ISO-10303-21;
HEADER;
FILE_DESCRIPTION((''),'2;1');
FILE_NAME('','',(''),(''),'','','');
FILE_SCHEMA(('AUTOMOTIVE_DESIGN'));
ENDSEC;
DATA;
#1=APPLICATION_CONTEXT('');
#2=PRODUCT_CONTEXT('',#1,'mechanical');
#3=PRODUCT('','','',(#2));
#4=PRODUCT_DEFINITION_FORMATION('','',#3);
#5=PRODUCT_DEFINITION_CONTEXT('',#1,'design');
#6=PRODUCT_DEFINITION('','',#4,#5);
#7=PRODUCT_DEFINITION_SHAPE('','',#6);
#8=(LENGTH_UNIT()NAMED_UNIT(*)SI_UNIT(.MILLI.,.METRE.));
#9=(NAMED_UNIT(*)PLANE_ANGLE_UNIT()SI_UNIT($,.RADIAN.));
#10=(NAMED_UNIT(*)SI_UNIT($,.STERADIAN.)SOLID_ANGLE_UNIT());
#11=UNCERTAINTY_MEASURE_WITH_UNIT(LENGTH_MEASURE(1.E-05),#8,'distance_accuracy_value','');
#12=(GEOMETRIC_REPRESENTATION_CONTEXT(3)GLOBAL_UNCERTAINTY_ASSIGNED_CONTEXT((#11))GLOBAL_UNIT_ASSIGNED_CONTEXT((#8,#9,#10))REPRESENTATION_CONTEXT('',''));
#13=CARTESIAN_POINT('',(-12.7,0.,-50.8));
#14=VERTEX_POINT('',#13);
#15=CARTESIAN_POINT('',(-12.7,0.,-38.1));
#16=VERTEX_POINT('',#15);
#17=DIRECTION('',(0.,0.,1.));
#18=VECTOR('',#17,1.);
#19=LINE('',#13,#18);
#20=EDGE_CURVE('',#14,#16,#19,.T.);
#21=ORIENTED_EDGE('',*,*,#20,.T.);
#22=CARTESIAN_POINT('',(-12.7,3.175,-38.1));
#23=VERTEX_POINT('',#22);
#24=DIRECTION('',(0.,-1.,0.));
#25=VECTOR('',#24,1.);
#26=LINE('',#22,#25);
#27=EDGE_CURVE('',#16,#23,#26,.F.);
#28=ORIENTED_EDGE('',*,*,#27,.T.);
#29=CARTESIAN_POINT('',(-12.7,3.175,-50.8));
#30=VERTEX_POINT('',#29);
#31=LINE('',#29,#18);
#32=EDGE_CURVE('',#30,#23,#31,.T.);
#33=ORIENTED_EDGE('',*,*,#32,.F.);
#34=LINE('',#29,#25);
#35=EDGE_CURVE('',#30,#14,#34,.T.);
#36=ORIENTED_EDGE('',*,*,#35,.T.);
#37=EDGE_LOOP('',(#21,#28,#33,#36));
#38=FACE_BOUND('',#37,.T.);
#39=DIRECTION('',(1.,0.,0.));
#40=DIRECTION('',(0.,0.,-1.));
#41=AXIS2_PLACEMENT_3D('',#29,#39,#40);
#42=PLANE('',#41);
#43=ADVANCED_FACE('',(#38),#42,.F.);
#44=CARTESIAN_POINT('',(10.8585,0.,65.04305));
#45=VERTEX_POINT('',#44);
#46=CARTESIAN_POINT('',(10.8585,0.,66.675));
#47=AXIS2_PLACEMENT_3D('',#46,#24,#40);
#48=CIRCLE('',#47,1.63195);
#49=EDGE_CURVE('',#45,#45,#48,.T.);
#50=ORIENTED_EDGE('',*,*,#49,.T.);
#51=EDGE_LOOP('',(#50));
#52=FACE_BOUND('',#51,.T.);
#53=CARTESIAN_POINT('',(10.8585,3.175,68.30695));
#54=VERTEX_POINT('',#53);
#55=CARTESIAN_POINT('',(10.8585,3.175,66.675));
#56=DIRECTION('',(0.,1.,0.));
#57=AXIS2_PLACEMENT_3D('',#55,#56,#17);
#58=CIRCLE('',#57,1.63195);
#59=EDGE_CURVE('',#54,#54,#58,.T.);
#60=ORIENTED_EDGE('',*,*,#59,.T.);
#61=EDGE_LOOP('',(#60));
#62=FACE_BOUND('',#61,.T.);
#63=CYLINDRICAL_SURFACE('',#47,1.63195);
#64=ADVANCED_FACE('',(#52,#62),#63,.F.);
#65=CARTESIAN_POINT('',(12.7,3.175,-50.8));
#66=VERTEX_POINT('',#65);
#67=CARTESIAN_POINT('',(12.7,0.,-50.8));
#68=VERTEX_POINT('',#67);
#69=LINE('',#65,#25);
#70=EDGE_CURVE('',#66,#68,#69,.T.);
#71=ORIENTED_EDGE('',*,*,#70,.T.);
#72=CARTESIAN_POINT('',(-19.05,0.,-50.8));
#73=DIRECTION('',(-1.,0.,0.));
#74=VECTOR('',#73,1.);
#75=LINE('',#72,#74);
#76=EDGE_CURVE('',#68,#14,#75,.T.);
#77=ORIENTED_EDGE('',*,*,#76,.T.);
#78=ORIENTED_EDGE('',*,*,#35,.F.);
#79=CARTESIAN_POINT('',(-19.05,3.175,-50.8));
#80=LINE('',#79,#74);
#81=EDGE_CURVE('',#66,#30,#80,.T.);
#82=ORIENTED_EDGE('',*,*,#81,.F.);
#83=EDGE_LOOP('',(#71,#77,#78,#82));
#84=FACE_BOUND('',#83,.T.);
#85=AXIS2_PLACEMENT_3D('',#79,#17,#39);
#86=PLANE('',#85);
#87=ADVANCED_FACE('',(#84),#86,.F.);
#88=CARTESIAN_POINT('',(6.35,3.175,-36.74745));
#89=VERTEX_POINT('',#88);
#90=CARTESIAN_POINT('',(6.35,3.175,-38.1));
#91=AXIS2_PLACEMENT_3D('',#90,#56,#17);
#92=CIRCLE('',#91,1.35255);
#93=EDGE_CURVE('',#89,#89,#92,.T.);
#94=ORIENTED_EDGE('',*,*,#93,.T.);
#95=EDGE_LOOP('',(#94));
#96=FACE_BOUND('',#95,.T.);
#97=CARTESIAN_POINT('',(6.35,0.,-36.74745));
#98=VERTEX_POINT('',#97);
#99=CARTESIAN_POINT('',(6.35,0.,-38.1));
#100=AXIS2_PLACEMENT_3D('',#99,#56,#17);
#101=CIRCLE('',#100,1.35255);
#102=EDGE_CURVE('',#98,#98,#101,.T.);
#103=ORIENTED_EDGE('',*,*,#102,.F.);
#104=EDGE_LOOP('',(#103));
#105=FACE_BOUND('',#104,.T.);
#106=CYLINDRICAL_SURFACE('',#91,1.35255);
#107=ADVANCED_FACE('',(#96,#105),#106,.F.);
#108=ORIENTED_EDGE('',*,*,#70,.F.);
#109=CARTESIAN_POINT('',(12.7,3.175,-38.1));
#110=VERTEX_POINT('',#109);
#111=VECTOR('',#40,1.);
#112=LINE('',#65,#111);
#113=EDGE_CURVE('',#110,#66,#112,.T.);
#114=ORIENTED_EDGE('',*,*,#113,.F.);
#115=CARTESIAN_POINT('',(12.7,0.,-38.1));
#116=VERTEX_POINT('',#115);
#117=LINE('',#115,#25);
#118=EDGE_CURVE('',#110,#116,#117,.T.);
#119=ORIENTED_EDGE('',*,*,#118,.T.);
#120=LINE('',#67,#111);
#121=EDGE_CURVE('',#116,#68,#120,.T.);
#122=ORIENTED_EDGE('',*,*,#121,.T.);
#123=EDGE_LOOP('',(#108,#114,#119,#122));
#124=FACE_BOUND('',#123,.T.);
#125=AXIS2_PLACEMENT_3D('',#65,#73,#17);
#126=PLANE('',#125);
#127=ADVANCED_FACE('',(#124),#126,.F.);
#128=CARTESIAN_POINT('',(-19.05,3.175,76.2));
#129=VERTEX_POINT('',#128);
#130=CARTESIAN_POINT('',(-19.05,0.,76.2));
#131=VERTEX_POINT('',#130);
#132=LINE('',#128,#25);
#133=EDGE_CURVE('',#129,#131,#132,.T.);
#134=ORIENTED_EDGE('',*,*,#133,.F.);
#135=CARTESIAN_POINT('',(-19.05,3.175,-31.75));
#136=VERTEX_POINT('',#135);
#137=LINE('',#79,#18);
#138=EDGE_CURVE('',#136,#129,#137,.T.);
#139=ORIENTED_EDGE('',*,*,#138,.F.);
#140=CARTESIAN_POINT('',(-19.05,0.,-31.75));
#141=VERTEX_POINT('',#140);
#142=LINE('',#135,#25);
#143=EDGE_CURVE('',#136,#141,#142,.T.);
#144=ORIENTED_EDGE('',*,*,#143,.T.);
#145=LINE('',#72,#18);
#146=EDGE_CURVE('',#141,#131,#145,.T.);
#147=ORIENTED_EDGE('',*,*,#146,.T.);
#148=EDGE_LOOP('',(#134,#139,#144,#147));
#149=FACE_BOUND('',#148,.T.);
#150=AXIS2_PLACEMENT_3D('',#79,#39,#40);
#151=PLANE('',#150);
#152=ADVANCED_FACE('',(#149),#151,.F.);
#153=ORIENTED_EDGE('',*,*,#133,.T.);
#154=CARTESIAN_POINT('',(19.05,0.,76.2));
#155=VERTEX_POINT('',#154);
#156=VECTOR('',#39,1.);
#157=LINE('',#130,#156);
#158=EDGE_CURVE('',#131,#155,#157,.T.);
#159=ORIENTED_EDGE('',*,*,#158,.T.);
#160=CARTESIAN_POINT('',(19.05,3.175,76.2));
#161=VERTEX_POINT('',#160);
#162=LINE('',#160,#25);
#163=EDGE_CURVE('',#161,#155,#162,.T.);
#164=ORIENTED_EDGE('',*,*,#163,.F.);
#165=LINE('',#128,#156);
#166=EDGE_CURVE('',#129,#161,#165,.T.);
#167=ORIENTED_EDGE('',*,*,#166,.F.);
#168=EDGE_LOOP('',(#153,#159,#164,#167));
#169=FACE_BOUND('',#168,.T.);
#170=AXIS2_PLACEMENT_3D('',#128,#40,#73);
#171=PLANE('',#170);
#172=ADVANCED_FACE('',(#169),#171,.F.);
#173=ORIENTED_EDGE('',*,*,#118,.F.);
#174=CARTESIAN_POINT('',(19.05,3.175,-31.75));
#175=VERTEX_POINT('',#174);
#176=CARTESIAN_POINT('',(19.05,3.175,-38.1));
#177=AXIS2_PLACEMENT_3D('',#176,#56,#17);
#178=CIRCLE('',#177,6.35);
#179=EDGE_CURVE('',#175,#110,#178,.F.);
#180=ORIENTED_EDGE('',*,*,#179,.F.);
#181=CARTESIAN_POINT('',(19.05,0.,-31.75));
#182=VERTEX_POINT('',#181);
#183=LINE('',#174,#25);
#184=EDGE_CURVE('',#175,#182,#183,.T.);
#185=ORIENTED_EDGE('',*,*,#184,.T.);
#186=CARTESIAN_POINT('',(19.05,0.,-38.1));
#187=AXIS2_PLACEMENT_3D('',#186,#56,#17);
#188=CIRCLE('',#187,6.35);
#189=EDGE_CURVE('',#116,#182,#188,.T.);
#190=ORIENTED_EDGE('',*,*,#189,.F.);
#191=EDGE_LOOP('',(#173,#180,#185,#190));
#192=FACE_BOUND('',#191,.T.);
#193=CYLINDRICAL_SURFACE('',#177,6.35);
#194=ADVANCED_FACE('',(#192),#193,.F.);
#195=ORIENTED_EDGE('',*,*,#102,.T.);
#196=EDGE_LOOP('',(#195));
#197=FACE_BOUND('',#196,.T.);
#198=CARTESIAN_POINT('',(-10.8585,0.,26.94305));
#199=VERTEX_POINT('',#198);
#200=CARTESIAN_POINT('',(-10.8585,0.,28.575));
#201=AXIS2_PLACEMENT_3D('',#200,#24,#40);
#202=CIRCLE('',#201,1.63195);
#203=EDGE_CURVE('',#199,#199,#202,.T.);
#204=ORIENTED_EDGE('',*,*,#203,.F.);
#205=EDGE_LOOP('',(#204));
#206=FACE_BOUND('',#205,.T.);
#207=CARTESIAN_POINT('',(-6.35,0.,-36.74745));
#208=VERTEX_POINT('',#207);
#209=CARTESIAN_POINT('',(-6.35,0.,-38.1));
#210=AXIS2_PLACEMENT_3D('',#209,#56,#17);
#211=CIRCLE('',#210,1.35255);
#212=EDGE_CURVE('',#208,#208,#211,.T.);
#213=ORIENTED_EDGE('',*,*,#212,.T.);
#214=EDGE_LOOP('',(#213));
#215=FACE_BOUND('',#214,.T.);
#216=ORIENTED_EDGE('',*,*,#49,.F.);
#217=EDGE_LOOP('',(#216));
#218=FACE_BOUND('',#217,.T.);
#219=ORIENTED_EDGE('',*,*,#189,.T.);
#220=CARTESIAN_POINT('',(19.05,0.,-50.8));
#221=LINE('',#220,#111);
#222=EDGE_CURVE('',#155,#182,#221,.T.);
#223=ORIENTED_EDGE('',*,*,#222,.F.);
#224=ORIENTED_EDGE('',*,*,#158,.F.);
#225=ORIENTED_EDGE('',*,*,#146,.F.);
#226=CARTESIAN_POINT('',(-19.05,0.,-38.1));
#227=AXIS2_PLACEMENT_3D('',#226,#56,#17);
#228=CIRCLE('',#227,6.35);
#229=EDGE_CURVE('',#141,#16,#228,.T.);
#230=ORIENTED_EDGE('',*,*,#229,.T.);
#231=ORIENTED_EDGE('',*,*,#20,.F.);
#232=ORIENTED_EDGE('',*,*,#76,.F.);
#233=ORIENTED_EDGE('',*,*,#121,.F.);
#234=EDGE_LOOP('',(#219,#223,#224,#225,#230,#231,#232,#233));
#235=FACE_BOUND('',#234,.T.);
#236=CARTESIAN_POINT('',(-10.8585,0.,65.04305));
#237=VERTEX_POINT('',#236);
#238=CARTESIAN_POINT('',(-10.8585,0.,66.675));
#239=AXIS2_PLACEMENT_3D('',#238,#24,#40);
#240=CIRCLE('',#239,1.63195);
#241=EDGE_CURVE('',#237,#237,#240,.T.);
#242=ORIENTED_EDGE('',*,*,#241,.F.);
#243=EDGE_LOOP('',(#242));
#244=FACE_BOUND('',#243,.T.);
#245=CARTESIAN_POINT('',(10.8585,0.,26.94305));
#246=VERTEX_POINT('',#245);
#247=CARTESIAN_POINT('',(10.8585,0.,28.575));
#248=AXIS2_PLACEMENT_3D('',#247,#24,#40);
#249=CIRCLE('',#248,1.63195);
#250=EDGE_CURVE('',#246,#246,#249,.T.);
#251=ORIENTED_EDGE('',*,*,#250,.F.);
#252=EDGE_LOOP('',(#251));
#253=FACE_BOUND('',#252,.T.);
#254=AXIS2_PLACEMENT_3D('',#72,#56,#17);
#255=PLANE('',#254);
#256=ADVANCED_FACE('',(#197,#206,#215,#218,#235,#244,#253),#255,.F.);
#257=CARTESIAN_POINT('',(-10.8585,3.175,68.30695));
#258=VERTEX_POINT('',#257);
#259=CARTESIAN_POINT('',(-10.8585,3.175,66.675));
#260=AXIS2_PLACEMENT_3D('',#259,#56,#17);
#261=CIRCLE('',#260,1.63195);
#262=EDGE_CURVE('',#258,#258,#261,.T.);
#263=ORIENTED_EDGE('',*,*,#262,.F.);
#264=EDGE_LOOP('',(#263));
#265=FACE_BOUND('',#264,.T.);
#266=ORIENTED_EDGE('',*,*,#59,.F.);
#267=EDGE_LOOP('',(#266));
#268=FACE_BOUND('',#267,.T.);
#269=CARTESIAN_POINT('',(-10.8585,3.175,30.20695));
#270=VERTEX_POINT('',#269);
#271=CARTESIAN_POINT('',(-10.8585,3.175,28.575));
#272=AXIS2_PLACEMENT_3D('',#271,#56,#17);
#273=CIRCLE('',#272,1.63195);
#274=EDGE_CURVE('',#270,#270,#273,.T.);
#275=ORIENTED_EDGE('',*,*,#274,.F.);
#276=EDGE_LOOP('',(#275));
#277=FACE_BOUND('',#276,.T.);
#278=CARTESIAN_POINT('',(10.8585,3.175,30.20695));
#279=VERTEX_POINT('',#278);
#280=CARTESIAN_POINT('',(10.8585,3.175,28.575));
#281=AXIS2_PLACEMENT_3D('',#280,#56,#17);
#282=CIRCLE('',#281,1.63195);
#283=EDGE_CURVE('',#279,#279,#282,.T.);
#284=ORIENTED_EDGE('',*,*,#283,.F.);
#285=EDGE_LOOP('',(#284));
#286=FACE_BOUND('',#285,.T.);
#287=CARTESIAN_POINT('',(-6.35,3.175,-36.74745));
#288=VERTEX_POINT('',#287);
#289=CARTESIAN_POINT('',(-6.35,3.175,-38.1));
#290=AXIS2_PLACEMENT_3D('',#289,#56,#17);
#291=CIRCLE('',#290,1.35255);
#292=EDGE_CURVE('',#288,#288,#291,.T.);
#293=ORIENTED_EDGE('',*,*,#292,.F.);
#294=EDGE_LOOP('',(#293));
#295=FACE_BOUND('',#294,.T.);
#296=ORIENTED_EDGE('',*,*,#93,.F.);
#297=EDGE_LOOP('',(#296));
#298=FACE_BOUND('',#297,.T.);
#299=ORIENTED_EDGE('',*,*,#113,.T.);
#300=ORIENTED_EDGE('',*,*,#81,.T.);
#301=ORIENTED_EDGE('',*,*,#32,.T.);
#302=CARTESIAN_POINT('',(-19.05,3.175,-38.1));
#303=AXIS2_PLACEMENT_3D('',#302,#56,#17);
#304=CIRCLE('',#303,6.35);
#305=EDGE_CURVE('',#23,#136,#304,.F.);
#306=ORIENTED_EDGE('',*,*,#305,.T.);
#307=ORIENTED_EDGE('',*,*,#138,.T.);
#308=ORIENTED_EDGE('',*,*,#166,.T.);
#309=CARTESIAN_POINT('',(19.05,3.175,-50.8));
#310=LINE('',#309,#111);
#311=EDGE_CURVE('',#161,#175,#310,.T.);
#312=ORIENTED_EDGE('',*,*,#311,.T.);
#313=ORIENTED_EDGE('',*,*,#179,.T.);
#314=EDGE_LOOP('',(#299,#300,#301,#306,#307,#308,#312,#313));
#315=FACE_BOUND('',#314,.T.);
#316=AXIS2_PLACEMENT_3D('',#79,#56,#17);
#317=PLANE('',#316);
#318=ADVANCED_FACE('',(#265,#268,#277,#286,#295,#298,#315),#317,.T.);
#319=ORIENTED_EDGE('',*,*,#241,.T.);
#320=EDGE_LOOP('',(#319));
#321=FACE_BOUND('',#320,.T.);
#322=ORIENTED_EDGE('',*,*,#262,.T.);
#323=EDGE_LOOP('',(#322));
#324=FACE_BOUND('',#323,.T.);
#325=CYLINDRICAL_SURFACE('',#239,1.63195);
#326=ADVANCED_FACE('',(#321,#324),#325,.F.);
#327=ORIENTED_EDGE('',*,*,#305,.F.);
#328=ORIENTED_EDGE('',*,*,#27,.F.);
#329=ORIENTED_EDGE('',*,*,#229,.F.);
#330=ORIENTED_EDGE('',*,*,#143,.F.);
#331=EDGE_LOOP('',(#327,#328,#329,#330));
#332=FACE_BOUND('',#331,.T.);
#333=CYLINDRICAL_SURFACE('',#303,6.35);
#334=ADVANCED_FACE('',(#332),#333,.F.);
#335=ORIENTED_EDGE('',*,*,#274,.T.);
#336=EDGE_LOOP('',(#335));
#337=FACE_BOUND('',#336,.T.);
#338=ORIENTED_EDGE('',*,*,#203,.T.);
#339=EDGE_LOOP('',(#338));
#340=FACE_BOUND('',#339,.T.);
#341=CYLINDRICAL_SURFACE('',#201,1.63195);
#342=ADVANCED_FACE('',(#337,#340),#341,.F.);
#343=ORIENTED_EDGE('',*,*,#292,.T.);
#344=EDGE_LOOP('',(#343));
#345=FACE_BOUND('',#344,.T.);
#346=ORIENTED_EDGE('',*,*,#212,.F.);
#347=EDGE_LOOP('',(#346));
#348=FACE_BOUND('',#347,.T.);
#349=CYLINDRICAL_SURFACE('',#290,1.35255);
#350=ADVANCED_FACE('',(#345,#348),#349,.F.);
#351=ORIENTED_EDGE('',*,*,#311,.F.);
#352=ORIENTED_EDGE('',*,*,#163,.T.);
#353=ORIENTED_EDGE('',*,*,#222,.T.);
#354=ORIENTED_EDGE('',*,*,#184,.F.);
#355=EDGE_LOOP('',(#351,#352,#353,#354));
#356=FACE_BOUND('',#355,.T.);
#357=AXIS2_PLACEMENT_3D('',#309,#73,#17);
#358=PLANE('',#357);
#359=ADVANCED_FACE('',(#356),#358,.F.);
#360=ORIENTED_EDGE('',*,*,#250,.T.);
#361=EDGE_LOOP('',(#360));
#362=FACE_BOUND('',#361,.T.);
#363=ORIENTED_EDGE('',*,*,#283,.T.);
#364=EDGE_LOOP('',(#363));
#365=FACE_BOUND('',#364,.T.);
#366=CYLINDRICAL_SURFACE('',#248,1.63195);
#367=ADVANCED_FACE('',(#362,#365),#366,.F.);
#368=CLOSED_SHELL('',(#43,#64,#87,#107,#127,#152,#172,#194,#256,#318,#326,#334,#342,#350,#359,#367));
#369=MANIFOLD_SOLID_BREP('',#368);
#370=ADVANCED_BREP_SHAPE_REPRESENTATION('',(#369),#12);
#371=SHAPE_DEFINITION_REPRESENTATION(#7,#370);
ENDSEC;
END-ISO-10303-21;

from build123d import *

# Parameters (mm, degrees)
SKETCH1_W                  = 38.1
SKETCH1_H                  = 127
EXTRUDE1_DEPTH             = 3.175
F_4_CLEARANCE_HOLE1_D      = 3.2639
F_4_CLEARANCE_HOLE1_DEPTH  = 101.6
F_4_CLEARANCE_HOLE1_TIP    = 0.980574487
SKETCH4_W                  = 6.35
SKETCH4_H                  = 19.05
CUT_EXTRUDE1_DEPTH         = 79.60930686
TAP_DRILL_FOR_6_TAP1_D     = 2.7051
TAP_DRILL_FOR_6_TAP1_DEPTH = 3.302
TAP_DRILL_FOR_6_TAP1_TIP   = 0.81269403
FILLET1_R                  = 6.35


with BuildPart() as part:
    # Sketch1 → Extrude1 (new body)
    with BuildSketch(Plane(origin=(0, 0, 0), x_dir=(1, 0, 0), z_dir=(0, 1, 0))):
        with Locations((0, -12.7)):
            Rectangle(SKETCH1_W, SKETCH1_H)
    extrude(amount=EXTRUDE1_DEPTH)

    # #4 Clearance Hole1
    with Locations(Plane(origin=(-10.8585, 0, 28.575), x_dir=(0, 0, -1), z_dir=(0, -1, 0))):
        with Locations((0, 0), (0, 21.717), (-38.1, 0), (-38.1, 21.717)):
            Hole(F_4_CLEARANCE_HOLE1_D / 2, depth=F_4_CLEARANCE_HOLE1_DEPTH)
            with Locations((0, 0, -(F_4_CLEARANCE_HOLE1_DEPTH + F_4_CLEARANCE_HOLE1_TIP / 2))):  # 118° drill point
                Cone(0, F_4_CLEARANCE_HOLE1_D / 2, F_4_CLEARANCE_HOLE1_TIP, mode=Mode.SUBTRACT)

    # Sketch4 → Cut-Extrude1 (cut, through all)
    with BuildSketch(Plane.XZ):
        with Locations((-15.875, -41.275)):
            Rectangle(SKETCH4_W, SKETCH4_H)
        with Locations((15.875, -41.275)):
            Rectangle(SKETCH4_W, SKETCH4_H)
    extrude(amount=-CUT_EXTRUDE1_DEPTH, mode=Mode.SUBTRACT)

    # Tap Drill for #6 Tap1
    with Locations(Plane(origin=(-6.35, 3.175, -38.1), x_dir=(0, 0, 1), z_dir=(0, 1, 0))):
        with Locations((0, 0), (0, 12.7)):
            Hole(TAP_DRILL_FOR_6_TAP1_D / 2, depth=TAP_DRILL_FOR_6_TAP1_DEPTH)
            with Locations((0, 0, -(TAP_DRILL_FOR_6_TAP1_DEPTH + TAP_DRILL_FOR_6_TAP1_TIP / 2))):  # 118° drill point
                Cone(0, TAP_DRILL_FOR_6_TAP1_D / 2, TAP_DRILL_FOR_6_TAP1_TIP, mode=Mode.SUBTRACT)

    # Fillet1
    fillet1_edges = [part.edges().sort_by_distance(p)[0] for p in [
        (-12.7, 1.5875, -31.75),
        (12.7, 1.5875, -31.75),
    ]]
    fillet(fillet1_edges, radius=FILLET1_R - 0.0001)  # a hair under: the kernel refuses the full size


solid = part.part
